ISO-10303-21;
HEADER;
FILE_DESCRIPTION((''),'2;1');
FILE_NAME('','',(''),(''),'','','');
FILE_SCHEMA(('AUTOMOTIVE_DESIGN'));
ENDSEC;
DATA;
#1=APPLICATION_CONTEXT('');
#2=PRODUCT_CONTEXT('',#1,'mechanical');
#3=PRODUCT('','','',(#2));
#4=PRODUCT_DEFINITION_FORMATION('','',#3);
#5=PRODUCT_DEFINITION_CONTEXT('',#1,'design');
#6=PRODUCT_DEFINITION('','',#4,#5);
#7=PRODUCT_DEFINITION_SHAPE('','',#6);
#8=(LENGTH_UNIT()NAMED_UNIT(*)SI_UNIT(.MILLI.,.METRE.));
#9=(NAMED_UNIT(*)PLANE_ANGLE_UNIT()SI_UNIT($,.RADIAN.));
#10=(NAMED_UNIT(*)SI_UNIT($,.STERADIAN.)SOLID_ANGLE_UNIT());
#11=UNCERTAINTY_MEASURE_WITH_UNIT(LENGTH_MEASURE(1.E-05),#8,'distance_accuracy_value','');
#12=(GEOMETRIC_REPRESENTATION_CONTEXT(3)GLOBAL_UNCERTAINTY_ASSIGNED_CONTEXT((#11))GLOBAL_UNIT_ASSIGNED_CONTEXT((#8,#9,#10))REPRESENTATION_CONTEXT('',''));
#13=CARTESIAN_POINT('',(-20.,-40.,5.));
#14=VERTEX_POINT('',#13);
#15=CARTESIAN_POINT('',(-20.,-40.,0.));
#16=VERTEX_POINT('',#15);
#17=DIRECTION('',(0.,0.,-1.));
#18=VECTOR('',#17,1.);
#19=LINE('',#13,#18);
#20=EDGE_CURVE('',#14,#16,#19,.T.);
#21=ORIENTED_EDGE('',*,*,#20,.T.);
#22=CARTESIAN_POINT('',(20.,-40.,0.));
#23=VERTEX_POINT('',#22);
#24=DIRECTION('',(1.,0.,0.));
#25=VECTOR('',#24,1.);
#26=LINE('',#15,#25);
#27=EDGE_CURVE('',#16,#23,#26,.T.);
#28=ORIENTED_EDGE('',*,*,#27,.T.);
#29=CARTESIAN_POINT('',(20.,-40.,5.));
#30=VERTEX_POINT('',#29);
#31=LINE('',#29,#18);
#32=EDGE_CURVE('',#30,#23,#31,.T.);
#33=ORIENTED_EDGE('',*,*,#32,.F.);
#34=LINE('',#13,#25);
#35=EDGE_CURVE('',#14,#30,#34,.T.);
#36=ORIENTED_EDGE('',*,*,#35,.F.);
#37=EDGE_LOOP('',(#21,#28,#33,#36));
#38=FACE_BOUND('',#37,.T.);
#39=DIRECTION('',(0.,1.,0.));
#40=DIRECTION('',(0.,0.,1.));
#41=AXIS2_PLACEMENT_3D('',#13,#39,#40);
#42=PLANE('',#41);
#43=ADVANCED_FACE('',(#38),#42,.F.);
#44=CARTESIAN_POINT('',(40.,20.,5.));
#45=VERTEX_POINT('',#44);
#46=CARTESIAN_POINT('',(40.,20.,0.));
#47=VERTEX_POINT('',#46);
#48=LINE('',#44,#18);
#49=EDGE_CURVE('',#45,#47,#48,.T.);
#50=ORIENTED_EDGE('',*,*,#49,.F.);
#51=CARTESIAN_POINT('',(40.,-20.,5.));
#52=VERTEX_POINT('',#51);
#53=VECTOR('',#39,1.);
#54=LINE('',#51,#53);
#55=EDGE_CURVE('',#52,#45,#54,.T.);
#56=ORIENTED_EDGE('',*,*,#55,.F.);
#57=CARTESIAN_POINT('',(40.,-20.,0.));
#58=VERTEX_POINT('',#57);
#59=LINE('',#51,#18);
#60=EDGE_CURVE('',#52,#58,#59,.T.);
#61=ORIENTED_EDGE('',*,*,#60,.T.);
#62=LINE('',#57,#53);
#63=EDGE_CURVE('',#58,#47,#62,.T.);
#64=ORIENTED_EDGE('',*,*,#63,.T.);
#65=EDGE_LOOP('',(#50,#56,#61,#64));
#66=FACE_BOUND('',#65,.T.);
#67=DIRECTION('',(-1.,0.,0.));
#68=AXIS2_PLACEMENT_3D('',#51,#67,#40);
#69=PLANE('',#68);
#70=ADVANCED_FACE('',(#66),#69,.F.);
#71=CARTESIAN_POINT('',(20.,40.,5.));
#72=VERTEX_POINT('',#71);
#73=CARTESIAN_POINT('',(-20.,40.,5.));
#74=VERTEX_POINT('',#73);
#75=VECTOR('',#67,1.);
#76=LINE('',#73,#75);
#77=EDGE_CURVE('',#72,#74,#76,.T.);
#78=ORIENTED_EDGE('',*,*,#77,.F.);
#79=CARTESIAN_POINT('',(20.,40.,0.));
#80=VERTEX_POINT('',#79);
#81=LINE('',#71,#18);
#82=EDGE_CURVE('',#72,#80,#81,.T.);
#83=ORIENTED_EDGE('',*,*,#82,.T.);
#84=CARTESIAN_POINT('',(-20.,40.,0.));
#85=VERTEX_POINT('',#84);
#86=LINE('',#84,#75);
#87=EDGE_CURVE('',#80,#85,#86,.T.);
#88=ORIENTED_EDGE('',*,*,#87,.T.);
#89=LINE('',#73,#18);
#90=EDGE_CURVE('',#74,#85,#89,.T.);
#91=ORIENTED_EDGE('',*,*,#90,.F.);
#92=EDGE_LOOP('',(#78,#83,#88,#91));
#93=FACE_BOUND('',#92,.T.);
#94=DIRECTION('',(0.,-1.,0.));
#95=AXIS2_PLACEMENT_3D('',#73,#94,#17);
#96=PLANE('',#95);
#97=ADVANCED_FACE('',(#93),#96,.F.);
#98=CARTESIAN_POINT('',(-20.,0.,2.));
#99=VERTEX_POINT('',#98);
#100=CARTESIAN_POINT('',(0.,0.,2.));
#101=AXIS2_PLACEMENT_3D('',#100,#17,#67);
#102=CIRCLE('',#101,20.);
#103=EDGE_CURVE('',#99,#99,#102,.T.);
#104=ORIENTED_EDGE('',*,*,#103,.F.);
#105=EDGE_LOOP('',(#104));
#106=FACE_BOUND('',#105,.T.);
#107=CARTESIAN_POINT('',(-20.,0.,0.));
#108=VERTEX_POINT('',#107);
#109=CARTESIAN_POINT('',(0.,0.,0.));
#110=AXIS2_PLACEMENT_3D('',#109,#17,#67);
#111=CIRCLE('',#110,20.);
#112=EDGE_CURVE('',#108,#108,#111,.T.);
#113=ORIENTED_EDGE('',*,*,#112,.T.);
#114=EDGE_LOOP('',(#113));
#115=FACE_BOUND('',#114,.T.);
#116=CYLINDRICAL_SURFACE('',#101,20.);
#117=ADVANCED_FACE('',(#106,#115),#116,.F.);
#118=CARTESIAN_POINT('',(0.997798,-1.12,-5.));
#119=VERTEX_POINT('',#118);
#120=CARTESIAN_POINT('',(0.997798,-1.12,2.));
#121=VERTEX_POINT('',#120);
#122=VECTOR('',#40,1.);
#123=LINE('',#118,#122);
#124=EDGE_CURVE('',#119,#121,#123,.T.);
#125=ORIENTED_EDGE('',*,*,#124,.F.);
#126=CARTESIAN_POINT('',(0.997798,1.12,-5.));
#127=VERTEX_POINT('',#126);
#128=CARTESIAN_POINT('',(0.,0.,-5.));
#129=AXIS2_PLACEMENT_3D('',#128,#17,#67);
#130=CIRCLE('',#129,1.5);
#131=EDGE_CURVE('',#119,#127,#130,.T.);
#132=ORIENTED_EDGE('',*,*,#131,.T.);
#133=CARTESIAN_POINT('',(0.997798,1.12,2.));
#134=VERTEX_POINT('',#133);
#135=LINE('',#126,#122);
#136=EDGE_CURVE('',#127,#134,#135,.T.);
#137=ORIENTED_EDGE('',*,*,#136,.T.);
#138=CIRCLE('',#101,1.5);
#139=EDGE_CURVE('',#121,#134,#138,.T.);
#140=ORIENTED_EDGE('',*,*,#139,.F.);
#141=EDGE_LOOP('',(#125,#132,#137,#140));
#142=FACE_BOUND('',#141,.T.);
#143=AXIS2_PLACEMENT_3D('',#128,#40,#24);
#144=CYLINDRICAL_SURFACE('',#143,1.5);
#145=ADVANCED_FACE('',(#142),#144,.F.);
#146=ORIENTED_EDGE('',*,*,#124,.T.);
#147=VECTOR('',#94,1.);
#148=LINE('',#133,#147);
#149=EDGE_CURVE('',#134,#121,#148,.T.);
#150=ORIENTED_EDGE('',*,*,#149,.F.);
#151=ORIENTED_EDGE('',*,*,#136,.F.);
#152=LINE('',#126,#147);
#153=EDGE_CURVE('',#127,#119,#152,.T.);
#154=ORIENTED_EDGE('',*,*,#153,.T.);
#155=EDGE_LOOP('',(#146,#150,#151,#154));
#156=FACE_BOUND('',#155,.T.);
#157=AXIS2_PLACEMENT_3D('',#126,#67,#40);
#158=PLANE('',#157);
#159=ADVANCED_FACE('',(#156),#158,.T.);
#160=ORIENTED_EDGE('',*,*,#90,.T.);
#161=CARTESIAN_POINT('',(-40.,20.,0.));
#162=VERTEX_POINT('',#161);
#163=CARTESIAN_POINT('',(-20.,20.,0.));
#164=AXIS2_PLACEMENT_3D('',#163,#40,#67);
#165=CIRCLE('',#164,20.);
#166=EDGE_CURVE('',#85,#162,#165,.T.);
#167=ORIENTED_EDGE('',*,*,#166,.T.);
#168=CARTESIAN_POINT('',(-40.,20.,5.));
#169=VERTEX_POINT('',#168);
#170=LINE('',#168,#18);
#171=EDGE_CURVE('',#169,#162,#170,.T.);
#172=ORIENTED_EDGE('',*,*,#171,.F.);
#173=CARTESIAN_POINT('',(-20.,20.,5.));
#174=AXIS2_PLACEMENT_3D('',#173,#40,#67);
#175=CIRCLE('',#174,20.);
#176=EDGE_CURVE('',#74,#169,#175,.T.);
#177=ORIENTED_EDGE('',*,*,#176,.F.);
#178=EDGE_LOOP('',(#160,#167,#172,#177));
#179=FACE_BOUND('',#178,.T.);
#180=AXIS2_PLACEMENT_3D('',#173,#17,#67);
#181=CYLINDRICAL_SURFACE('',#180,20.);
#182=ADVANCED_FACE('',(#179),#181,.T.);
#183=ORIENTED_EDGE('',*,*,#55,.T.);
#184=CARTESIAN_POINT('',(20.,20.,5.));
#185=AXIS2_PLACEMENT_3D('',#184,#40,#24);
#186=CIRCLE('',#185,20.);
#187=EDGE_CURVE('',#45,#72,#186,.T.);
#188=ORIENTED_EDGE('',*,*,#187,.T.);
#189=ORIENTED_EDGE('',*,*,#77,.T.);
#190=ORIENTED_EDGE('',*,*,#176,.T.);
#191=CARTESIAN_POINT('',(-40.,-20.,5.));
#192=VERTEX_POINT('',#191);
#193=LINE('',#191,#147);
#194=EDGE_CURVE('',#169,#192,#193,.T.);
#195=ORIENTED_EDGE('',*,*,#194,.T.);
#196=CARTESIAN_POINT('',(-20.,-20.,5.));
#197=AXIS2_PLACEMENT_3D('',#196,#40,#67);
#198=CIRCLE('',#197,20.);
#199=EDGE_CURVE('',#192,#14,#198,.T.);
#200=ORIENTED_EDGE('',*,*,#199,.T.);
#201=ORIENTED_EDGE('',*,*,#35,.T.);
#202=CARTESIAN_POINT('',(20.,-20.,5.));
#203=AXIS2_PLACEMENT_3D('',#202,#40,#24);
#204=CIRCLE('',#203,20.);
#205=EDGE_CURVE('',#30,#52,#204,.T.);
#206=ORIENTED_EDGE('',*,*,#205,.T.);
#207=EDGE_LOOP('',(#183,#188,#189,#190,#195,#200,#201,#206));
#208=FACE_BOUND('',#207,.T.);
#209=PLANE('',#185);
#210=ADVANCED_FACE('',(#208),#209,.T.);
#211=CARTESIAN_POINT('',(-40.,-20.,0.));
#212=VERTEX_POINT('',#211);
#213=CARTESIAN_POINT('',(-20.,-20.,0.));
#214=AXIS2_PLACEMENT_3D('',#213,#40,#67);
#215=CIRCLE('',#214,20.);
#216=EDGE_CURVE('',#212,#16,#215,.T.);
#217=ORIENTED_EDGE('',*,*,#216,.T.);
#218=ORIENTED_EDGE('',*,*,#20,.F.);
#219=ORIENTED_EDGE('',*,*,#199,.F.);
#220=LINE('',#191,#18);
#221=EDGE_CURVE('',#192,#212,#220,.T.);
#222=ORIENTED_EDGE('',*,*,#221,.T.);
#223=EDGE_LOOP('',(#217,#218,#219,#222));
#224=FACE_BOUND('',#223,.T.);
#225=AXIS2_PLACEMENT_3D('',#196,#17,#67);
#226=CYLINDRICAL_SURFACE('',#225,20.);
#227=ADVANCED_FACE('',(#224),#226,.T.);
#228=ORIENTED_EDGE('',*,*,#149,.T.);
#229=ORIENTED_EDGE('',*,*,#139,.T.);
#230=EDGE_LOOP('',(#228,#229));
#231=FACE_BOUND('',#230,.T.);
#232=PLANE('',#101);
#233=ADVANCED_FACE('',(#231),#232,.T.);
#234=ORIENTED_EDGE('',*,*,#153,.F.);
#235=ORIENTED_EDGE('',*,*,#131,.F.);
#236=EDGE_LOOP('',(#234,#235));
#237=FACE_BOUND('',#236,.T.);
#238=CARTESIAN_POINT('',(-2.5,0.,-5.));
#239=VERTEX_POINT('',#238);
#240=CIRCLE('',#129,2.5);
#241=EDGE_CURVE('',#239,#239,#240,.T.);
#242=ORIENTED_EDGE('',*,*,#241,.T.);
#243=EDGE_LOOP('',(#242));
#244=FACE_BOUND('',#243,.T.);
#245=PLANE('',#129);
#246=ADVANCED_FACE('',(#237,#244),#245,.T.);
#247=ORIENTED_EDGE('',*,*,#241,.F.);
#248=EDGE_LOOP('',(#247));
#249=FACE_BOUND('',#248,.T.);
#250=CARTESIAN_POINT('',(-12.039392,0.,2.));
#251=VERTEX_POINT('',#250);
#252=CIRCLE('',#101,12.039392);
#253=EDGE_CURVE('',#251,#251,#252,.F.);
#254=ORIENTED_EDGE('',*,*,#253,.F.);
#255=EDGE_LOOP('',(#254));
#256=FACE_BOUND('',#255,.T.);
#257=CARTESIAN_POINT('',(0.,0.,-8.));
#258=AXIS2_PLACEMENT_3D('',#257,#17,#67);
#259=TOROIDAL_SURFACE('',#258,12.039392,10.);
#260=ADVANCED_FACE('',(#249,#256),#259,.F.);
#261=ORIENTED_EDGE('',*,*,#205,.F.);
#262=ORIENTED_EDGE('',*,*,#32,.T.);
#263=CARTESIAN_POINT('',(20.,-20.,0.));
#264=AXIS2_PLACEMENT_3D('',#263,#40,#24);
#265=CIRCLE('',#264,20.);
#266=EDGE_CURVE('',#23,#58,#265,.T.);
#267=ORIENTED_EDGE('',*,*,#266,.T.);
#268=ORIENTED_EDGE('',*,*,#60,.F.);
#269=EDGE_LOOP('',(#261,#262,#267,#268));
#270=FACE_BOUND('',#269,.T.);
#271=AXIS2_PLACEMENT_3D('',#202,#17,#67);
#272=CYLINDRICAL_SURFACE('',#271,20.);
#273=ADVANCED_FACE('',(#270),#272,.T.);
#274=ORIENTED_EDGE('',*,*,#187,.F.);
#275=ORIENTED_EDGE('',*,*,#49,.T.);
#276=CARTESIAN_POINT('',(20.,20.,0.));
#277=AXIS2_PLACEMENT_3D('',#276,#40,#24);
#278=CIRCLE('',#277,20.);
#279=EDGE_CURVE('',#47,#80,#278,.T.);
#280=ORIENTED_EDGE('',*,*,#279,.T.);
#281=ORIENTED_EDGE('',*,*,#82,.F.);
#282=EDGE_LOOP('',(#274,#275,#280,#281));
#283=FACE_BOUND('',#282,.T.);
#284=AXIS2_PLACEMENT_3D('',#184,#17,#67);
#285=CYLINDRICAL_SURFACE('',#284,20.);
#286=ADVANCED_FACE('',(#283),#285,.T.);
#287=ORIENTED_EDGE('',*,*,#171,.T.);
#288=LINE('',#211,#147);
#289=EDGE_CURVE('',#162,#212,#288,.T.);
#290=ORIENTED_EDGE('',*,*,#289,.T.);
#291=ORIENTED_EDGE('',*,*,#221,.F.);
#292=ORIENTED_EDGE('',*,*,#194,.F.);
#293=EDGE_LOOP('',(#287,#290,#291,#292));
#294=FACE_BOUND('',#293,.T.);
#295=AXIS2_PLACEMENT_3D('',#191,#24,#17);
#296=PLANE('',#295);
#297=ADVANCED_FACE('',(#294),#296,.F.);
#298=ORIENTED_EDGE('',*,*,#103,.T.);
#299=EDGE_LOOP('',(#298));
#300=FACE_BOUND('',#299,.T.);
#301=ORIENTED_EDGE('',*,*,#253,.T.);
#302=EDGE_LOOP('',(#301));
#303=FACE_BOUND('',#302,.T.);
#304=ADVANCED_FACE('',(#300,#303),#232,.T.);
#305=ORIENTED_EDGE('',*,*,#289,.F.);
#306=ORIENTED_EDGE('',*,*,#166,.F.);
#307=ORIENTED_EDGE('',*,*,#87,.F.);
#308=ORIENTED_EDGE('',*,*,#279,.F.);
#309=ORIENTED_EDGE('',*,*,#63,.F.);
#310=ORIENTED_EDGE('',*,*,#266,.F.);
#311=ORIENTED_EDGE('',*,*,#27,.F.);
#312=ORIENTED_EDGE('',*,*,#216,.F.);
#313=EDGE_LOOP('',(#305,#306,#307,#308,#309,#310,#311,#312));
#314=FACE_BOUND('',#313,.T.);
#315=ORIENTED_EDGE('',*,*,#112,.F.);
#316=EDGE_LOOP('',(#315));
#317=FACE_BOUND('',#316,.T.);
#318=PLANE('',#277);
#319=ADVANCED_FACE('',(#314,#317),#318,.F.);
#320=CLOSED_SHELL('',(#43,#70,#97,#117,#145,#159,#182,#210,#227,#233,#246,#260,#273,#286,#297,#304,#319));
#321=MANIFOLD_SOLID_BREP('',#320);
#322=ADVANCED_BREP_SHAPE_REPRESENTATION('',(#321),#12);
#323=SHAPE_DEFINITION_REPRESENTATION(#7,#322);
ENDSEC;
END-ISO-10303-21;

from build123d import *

# Parameters (mm, degrees)
BOSS_EXTRUDE1_DEPTH = 5
SKETCH3_R           = 20
CUT_EXTRUDE2_DEPTH  = 2
SKETCH4_R           = 2.5
BOSS_EXTRUDE2_DEPTH = 7
FILLET1_R           = 10


with BuildPart() as part:
    # Sketch1 → Boss-Extrude1 (new body)
    with BuildSketch(Plane.XY):
        with BuildLine():
            Line((-20, -40), (20, -40))
            ThreePointArc((20, -40), (34.142135624, -34.142135624), (40, -20))
            Line((40, -20), (40, 20))
            ThreePointArc((40, 20), (34.142135624, 34.142135624), (20, 40))
            Line((20, 40), (-20, 40))
            ThreePointArc((-20, 40), (-34.142135624, 34.142135624), (-40, 20))
            Line((-40, 20), (-40, -20))
            ThreePointArc((-40, -20), (-34.142135624, -34.142135624), (-20, -40))
        make_face()
    extrude(amount=BOSS_EXTRUDE1_DEPTH)

    # Sketch3 → Cut-Extrude2 (cut)
    with BuildSketch(Plane(origin=(0, 0, 0), x_dir=(-1, 0, 0), z_dir=(0, 0, -1))):
        Circle(SKETCH3_R)
    extrude(amount=-CUT_EXTRUDE2_DEPTH, mode=Mode.SUBTRACT)

    # Sketch4 → Boss-Extrude2 (add)
    with BuildSketch(Plane(origin=(0, 0, 2), x_dir=(-1, 0, 0), z_dir=(0, 0, -1))):
        Circle(SKETCH4_R)
        with BuildLine():
            Line((-0.997797575, 1.12), (-0.997797575, -1.12))
            ThreePointArc((-0.997797575, -1.12), (1.5, 0), (-0.997797575, 1.12))
        make_face(mode=Mode.SUBTRACT)
    extrude(amount=BOSS_EXTRUDE2_DEPTH)

    # Fillet1
    # the kernel refuses this fillet: 10 mm, written as the material it adds along each edge
    with BuildSketch(Plane(origin=(0, 0, 2), x_dir=(-1, 0, 0), z_dir=(0, -1, 0))) as fillet1_piece_1:
        with BuildLine():
            CenterArc((12.039392014, 10), FILLET1_R, 197.457603124, 72.542396876)
            Line((2.5, 7), (2.30921216, 6.94))
            ThreePointArc((2.30921216, 6.94), (2.3, 3.5), (2.3, 0))
            Line((2.3, 0), (2.5, -0.2))
            Line((2.5, -0.2), (12.039392014, -0.2))
            Line((12.039392014, -0.2), (12.039392014, 0))
        make_face()
    revolve(axis=Axis((0, 0, 2), (0, 0, -1)))


solid = part.part
